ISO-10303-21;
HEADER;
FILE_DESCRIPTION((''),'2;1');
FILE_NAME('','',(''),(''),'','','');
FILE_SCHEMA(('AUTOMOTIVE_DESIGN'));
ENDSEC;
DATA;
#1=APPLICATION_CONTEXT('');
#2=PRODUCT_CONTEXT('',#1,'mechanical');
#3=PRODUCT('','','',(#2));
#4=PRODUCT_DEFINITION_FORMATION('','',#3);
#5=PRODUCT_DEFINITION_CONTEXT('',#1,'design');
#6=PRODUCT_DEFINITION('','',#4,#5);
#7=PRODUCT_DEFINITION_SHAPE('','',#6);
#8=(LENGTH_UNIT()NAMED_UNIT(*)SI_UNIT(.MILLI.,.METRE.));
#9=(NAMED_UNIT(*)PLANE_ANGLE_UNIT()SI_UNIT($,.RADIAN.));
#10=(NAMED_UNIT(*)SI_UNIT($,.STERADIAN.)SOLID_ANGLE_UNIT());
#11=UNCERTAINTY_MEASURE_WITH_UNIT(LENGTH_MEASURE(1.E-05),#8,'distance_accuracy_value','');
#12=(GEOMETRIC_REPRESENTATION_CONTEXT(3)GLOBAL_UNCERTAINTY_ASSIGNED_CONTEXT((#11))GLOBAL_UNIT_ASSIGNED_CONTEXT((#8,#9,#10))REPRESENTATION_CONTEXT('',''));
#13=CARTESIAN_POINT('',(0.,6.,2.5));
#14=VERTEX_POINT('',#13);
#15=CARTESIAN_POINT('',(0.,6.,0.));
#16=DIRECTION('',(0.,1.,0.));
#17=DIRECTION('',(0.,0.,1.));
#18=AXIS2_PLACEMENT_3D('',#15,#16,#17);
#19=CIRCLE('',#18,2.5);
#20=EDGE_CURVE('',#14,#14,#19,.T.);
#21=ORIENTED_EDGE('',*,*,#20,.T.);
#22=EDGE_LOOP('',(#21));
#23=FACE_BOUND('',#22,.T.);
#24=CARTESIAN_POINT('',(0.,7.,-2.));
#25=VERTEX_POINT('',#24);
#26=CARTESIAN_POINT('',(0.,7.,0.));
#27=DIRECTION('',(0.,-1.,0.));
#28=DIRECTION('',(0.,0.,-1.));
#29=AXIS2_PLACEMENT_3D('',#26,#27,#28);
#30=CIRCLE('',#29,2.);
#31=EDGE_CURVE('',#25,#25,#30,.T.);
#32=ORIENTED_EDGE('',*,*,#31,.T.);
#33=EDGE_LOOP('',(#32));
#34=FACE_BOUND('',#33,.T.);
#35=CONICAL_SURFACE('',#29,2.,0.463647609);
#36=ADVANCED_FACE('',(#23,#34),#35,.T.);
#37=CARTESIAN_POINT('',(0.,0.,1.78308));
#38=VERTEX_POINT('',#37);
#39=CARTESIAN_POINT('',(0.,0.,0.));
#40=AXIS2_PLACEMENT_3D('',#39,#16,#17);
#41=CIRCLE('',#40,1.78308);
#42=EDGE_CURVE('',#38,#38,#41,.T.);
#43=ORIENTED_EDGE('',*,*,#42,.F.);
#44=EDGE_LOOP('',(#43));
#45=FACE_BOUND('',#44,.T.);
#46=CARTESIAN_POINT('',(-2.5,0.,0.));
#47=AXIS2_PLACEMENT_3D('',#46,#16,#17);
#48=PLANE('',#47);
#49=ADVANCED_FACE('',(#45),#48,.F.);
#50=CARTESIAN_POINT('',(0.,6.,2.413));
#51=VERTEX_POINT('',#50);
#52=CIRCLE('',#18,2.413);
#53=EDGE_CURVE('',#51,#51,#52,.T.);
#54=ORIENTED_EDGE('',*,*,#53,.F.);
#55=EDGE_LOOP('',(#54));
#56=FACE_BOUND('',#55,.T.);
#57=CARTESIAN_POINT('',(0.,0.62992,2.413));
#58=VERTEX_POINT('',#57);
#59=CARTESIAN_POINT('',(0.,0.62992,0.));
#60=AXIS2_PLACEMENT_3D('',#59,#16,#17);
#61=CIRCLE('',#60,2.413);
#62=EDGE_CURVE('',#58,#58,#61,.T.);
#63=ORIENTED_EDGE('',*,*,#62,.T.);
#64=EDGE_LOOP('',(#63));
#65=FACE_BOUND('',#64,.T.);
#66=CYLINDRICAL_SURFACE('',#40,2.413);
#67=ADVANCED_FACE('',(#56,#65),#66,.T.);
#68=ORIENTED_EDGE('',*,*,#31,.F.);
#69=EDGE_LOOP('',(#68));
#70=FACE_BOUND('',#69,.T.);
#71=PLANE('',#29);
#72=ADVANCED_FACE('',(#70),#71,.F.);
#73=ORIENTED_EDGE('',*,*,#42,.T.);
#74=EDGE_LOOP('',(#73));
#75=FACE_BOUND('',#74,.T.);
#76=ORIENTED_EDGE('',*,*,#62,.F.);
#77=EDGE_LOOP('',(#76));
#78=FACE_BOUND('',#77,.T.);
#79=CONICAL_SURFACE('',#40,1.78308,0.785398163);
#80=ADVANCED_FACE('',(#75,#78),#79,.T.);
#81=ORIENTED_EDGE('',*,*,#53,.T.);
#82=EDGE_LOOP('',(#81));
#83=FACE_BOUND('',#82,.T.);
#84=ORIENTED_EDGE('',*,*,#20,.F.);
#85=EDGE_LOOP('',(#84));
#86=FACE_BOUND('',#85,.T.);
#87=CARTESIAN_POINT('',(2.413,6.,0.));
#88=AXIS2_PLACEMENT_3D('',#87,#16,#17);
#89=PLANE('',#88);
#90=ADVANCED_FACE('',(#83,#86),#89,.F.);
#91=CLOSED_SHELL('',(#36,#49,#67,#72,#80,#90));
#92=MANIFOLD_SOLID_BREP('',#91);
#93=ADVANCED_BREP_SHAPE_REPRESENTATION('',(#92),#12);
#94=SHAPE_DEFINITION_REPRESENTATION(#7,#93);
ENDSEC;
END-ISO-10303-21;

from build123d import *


# Read off the part's stored shape, not the designer's step: #10-24 机械螺纹 螺柱1
with BuildPart() as part:
    # 草图1 → 旋转1 (revolve)
    with BuildSketch(Plane.XY, mode=Mode.PRIVATE) as revolve_1_sk:
        Polygon((0, 0), (0, 7), (-2, 7), (-2.5, 6), (-2.5, 0), align=None)
    revolve(revolve_1_sk.sketch.rotate(Axis((0, 0, 0), (0, 1, 0)), 270), axis=Axis((0, 0, 0), (0, 1, 0)))

    # #10-24 机械螺纹 螺柱1 outline → #10-24 机械螺纹 螺柱1 (revolve, cut)
    with BuildSketch(Plane.XY):
        Polygon((1.78308, 0), (2.5, 0), (2.5, 6), (2.413, 6), (2.413, 0.62992), align=None)
    revolve(axis=Axis((0, 0, 0), (0, 1, 0)), mode=Mode.SUBTRACT)


solid = part.part
